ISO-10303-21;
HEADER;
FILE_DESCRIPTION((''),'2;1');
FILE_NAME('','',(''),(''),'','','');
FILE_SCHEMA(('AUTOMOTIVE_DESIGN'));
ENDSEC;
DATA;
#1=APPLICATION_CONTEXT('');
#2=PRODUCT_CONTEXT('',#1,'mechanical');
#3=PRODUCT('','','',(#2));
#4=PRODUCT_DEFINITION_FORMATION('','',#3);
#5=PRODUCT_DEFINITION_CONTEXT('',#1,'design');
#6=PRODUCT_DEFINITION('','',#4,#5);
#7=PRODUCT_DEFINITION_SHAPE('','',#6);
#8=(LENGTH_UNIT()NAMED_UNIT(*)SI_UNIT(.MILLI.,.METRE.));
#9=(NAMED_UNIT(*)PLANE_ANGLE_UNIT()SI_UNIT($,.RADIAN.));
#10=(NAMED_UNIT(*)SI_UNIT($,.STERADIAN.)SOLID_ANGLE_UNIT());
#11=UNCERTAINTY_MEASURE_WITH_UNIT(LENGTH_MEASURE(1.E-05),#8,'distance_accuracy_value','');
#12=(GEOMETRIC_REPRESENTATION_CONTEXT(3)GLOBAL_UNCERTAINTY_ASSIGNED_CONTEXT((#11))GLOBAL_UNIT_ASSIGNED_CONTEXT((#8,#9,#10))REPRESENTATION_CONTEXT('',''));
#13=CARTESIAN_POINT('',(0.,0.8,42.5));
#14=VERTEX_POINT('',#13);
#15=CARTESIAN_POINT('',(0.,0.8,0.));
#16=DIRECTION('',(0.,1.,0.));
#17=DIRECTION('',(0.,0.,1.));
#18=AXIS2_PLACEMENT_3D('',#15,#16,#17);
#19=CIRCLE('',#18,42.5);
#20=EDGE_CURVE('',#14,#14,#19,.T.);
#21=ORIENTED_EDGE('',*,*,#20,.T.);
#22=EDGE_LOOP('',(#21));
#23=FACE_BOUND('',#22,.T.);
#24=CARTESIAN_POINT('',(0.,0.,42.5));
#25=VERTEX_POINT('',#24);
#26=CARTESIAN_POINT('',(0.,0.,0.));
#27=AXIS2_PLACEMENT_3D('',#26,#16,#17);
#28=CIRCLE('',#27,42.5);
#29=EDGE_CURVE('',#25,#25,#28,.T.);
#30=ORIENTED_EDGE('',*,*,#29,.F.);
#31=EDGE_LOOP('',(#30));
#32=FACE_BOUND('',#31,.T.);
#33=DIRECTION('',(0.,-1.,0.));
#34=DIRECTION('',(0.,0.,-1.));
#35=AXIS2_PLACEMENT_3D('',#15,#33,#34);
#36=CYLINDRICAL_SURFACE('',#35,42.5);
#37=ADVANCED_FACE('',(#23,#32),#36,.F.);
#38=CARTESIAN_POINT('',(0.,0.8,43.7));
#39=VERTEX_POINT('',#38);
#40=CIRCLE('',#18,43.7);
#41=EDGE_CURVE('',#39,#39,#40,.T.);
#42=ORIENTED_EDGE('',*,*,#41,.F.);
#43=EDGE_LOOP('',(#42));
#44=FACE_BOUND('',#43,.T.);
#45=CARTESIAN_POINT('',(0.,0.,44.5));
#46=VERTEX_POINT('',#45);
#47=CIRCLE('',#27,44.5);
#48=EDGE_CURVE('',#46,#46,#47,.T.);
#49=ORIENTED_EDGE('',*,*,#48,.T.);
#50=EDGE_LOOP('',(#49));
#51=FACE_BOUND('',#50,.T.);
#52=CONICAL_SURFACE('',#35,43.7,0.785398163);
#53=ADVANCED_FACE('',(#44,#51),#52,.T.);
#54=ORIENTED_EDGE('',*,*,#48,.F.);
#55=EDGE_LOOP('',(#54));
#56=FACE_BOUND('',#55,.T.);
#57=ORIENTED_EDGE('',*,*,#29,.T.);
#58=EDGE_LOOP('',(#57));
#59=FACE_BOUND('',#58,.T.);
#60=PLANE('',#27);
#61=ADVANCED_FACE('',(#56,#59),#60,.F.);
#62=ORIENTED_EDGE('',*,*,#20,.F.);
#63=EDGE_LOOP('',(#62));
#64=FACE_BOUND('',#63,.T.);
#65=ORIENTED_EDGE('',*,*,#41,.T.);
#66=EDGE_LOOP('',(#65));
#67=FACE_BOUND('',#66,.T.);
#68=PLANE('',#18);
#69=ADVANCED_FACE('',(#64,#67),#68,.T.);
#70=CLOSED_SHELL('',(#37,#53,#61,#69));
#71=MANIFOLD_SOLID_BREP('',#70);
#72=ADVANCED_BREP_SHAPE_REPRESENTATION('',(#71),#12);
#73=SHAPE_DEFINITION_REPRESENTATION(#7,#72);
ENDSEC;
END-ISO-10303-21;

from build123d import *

# Parameters (mm, degrees)
SKETCH1_R           = 44.5
SKETCH1_R_2         = 42.5
BOSS_EXTRUDE1_DEPTH = 0.8
CHAMFER1_SIZE       = 0.8


with BuildPart() as part:
    # Sketch1 → Boss-Extrude1 (new body)
    with BuildSketch(Plane(origin=(0, 0, 0), x_dir=(1, 0, 0), z_dir=(0, 1, 0))):
        with Locations(Location((0, 0, 0), (0, 0, 270))):
            Circle(SKETCH1_R)
        with Locations(Location((0, 0, 0), (0, 0, 270))):
            Circle(SKETCH1_R_2, mode=Mode.SUBTRACT)
    extrude(amount=BOSS_EXTRUDE1_DEPTH)

    # Chamfer1
    chamfer1_edges = [part.edges().sort_by_distance(p)[0] for p in [
        (0, 0.8, -44.5),
    ]]
    chamfer(chamfer1_edges, length=CHAMFER1_SIZE - 0.0001)  # a hair under: the kernel refuses the full size


solid = part.part
